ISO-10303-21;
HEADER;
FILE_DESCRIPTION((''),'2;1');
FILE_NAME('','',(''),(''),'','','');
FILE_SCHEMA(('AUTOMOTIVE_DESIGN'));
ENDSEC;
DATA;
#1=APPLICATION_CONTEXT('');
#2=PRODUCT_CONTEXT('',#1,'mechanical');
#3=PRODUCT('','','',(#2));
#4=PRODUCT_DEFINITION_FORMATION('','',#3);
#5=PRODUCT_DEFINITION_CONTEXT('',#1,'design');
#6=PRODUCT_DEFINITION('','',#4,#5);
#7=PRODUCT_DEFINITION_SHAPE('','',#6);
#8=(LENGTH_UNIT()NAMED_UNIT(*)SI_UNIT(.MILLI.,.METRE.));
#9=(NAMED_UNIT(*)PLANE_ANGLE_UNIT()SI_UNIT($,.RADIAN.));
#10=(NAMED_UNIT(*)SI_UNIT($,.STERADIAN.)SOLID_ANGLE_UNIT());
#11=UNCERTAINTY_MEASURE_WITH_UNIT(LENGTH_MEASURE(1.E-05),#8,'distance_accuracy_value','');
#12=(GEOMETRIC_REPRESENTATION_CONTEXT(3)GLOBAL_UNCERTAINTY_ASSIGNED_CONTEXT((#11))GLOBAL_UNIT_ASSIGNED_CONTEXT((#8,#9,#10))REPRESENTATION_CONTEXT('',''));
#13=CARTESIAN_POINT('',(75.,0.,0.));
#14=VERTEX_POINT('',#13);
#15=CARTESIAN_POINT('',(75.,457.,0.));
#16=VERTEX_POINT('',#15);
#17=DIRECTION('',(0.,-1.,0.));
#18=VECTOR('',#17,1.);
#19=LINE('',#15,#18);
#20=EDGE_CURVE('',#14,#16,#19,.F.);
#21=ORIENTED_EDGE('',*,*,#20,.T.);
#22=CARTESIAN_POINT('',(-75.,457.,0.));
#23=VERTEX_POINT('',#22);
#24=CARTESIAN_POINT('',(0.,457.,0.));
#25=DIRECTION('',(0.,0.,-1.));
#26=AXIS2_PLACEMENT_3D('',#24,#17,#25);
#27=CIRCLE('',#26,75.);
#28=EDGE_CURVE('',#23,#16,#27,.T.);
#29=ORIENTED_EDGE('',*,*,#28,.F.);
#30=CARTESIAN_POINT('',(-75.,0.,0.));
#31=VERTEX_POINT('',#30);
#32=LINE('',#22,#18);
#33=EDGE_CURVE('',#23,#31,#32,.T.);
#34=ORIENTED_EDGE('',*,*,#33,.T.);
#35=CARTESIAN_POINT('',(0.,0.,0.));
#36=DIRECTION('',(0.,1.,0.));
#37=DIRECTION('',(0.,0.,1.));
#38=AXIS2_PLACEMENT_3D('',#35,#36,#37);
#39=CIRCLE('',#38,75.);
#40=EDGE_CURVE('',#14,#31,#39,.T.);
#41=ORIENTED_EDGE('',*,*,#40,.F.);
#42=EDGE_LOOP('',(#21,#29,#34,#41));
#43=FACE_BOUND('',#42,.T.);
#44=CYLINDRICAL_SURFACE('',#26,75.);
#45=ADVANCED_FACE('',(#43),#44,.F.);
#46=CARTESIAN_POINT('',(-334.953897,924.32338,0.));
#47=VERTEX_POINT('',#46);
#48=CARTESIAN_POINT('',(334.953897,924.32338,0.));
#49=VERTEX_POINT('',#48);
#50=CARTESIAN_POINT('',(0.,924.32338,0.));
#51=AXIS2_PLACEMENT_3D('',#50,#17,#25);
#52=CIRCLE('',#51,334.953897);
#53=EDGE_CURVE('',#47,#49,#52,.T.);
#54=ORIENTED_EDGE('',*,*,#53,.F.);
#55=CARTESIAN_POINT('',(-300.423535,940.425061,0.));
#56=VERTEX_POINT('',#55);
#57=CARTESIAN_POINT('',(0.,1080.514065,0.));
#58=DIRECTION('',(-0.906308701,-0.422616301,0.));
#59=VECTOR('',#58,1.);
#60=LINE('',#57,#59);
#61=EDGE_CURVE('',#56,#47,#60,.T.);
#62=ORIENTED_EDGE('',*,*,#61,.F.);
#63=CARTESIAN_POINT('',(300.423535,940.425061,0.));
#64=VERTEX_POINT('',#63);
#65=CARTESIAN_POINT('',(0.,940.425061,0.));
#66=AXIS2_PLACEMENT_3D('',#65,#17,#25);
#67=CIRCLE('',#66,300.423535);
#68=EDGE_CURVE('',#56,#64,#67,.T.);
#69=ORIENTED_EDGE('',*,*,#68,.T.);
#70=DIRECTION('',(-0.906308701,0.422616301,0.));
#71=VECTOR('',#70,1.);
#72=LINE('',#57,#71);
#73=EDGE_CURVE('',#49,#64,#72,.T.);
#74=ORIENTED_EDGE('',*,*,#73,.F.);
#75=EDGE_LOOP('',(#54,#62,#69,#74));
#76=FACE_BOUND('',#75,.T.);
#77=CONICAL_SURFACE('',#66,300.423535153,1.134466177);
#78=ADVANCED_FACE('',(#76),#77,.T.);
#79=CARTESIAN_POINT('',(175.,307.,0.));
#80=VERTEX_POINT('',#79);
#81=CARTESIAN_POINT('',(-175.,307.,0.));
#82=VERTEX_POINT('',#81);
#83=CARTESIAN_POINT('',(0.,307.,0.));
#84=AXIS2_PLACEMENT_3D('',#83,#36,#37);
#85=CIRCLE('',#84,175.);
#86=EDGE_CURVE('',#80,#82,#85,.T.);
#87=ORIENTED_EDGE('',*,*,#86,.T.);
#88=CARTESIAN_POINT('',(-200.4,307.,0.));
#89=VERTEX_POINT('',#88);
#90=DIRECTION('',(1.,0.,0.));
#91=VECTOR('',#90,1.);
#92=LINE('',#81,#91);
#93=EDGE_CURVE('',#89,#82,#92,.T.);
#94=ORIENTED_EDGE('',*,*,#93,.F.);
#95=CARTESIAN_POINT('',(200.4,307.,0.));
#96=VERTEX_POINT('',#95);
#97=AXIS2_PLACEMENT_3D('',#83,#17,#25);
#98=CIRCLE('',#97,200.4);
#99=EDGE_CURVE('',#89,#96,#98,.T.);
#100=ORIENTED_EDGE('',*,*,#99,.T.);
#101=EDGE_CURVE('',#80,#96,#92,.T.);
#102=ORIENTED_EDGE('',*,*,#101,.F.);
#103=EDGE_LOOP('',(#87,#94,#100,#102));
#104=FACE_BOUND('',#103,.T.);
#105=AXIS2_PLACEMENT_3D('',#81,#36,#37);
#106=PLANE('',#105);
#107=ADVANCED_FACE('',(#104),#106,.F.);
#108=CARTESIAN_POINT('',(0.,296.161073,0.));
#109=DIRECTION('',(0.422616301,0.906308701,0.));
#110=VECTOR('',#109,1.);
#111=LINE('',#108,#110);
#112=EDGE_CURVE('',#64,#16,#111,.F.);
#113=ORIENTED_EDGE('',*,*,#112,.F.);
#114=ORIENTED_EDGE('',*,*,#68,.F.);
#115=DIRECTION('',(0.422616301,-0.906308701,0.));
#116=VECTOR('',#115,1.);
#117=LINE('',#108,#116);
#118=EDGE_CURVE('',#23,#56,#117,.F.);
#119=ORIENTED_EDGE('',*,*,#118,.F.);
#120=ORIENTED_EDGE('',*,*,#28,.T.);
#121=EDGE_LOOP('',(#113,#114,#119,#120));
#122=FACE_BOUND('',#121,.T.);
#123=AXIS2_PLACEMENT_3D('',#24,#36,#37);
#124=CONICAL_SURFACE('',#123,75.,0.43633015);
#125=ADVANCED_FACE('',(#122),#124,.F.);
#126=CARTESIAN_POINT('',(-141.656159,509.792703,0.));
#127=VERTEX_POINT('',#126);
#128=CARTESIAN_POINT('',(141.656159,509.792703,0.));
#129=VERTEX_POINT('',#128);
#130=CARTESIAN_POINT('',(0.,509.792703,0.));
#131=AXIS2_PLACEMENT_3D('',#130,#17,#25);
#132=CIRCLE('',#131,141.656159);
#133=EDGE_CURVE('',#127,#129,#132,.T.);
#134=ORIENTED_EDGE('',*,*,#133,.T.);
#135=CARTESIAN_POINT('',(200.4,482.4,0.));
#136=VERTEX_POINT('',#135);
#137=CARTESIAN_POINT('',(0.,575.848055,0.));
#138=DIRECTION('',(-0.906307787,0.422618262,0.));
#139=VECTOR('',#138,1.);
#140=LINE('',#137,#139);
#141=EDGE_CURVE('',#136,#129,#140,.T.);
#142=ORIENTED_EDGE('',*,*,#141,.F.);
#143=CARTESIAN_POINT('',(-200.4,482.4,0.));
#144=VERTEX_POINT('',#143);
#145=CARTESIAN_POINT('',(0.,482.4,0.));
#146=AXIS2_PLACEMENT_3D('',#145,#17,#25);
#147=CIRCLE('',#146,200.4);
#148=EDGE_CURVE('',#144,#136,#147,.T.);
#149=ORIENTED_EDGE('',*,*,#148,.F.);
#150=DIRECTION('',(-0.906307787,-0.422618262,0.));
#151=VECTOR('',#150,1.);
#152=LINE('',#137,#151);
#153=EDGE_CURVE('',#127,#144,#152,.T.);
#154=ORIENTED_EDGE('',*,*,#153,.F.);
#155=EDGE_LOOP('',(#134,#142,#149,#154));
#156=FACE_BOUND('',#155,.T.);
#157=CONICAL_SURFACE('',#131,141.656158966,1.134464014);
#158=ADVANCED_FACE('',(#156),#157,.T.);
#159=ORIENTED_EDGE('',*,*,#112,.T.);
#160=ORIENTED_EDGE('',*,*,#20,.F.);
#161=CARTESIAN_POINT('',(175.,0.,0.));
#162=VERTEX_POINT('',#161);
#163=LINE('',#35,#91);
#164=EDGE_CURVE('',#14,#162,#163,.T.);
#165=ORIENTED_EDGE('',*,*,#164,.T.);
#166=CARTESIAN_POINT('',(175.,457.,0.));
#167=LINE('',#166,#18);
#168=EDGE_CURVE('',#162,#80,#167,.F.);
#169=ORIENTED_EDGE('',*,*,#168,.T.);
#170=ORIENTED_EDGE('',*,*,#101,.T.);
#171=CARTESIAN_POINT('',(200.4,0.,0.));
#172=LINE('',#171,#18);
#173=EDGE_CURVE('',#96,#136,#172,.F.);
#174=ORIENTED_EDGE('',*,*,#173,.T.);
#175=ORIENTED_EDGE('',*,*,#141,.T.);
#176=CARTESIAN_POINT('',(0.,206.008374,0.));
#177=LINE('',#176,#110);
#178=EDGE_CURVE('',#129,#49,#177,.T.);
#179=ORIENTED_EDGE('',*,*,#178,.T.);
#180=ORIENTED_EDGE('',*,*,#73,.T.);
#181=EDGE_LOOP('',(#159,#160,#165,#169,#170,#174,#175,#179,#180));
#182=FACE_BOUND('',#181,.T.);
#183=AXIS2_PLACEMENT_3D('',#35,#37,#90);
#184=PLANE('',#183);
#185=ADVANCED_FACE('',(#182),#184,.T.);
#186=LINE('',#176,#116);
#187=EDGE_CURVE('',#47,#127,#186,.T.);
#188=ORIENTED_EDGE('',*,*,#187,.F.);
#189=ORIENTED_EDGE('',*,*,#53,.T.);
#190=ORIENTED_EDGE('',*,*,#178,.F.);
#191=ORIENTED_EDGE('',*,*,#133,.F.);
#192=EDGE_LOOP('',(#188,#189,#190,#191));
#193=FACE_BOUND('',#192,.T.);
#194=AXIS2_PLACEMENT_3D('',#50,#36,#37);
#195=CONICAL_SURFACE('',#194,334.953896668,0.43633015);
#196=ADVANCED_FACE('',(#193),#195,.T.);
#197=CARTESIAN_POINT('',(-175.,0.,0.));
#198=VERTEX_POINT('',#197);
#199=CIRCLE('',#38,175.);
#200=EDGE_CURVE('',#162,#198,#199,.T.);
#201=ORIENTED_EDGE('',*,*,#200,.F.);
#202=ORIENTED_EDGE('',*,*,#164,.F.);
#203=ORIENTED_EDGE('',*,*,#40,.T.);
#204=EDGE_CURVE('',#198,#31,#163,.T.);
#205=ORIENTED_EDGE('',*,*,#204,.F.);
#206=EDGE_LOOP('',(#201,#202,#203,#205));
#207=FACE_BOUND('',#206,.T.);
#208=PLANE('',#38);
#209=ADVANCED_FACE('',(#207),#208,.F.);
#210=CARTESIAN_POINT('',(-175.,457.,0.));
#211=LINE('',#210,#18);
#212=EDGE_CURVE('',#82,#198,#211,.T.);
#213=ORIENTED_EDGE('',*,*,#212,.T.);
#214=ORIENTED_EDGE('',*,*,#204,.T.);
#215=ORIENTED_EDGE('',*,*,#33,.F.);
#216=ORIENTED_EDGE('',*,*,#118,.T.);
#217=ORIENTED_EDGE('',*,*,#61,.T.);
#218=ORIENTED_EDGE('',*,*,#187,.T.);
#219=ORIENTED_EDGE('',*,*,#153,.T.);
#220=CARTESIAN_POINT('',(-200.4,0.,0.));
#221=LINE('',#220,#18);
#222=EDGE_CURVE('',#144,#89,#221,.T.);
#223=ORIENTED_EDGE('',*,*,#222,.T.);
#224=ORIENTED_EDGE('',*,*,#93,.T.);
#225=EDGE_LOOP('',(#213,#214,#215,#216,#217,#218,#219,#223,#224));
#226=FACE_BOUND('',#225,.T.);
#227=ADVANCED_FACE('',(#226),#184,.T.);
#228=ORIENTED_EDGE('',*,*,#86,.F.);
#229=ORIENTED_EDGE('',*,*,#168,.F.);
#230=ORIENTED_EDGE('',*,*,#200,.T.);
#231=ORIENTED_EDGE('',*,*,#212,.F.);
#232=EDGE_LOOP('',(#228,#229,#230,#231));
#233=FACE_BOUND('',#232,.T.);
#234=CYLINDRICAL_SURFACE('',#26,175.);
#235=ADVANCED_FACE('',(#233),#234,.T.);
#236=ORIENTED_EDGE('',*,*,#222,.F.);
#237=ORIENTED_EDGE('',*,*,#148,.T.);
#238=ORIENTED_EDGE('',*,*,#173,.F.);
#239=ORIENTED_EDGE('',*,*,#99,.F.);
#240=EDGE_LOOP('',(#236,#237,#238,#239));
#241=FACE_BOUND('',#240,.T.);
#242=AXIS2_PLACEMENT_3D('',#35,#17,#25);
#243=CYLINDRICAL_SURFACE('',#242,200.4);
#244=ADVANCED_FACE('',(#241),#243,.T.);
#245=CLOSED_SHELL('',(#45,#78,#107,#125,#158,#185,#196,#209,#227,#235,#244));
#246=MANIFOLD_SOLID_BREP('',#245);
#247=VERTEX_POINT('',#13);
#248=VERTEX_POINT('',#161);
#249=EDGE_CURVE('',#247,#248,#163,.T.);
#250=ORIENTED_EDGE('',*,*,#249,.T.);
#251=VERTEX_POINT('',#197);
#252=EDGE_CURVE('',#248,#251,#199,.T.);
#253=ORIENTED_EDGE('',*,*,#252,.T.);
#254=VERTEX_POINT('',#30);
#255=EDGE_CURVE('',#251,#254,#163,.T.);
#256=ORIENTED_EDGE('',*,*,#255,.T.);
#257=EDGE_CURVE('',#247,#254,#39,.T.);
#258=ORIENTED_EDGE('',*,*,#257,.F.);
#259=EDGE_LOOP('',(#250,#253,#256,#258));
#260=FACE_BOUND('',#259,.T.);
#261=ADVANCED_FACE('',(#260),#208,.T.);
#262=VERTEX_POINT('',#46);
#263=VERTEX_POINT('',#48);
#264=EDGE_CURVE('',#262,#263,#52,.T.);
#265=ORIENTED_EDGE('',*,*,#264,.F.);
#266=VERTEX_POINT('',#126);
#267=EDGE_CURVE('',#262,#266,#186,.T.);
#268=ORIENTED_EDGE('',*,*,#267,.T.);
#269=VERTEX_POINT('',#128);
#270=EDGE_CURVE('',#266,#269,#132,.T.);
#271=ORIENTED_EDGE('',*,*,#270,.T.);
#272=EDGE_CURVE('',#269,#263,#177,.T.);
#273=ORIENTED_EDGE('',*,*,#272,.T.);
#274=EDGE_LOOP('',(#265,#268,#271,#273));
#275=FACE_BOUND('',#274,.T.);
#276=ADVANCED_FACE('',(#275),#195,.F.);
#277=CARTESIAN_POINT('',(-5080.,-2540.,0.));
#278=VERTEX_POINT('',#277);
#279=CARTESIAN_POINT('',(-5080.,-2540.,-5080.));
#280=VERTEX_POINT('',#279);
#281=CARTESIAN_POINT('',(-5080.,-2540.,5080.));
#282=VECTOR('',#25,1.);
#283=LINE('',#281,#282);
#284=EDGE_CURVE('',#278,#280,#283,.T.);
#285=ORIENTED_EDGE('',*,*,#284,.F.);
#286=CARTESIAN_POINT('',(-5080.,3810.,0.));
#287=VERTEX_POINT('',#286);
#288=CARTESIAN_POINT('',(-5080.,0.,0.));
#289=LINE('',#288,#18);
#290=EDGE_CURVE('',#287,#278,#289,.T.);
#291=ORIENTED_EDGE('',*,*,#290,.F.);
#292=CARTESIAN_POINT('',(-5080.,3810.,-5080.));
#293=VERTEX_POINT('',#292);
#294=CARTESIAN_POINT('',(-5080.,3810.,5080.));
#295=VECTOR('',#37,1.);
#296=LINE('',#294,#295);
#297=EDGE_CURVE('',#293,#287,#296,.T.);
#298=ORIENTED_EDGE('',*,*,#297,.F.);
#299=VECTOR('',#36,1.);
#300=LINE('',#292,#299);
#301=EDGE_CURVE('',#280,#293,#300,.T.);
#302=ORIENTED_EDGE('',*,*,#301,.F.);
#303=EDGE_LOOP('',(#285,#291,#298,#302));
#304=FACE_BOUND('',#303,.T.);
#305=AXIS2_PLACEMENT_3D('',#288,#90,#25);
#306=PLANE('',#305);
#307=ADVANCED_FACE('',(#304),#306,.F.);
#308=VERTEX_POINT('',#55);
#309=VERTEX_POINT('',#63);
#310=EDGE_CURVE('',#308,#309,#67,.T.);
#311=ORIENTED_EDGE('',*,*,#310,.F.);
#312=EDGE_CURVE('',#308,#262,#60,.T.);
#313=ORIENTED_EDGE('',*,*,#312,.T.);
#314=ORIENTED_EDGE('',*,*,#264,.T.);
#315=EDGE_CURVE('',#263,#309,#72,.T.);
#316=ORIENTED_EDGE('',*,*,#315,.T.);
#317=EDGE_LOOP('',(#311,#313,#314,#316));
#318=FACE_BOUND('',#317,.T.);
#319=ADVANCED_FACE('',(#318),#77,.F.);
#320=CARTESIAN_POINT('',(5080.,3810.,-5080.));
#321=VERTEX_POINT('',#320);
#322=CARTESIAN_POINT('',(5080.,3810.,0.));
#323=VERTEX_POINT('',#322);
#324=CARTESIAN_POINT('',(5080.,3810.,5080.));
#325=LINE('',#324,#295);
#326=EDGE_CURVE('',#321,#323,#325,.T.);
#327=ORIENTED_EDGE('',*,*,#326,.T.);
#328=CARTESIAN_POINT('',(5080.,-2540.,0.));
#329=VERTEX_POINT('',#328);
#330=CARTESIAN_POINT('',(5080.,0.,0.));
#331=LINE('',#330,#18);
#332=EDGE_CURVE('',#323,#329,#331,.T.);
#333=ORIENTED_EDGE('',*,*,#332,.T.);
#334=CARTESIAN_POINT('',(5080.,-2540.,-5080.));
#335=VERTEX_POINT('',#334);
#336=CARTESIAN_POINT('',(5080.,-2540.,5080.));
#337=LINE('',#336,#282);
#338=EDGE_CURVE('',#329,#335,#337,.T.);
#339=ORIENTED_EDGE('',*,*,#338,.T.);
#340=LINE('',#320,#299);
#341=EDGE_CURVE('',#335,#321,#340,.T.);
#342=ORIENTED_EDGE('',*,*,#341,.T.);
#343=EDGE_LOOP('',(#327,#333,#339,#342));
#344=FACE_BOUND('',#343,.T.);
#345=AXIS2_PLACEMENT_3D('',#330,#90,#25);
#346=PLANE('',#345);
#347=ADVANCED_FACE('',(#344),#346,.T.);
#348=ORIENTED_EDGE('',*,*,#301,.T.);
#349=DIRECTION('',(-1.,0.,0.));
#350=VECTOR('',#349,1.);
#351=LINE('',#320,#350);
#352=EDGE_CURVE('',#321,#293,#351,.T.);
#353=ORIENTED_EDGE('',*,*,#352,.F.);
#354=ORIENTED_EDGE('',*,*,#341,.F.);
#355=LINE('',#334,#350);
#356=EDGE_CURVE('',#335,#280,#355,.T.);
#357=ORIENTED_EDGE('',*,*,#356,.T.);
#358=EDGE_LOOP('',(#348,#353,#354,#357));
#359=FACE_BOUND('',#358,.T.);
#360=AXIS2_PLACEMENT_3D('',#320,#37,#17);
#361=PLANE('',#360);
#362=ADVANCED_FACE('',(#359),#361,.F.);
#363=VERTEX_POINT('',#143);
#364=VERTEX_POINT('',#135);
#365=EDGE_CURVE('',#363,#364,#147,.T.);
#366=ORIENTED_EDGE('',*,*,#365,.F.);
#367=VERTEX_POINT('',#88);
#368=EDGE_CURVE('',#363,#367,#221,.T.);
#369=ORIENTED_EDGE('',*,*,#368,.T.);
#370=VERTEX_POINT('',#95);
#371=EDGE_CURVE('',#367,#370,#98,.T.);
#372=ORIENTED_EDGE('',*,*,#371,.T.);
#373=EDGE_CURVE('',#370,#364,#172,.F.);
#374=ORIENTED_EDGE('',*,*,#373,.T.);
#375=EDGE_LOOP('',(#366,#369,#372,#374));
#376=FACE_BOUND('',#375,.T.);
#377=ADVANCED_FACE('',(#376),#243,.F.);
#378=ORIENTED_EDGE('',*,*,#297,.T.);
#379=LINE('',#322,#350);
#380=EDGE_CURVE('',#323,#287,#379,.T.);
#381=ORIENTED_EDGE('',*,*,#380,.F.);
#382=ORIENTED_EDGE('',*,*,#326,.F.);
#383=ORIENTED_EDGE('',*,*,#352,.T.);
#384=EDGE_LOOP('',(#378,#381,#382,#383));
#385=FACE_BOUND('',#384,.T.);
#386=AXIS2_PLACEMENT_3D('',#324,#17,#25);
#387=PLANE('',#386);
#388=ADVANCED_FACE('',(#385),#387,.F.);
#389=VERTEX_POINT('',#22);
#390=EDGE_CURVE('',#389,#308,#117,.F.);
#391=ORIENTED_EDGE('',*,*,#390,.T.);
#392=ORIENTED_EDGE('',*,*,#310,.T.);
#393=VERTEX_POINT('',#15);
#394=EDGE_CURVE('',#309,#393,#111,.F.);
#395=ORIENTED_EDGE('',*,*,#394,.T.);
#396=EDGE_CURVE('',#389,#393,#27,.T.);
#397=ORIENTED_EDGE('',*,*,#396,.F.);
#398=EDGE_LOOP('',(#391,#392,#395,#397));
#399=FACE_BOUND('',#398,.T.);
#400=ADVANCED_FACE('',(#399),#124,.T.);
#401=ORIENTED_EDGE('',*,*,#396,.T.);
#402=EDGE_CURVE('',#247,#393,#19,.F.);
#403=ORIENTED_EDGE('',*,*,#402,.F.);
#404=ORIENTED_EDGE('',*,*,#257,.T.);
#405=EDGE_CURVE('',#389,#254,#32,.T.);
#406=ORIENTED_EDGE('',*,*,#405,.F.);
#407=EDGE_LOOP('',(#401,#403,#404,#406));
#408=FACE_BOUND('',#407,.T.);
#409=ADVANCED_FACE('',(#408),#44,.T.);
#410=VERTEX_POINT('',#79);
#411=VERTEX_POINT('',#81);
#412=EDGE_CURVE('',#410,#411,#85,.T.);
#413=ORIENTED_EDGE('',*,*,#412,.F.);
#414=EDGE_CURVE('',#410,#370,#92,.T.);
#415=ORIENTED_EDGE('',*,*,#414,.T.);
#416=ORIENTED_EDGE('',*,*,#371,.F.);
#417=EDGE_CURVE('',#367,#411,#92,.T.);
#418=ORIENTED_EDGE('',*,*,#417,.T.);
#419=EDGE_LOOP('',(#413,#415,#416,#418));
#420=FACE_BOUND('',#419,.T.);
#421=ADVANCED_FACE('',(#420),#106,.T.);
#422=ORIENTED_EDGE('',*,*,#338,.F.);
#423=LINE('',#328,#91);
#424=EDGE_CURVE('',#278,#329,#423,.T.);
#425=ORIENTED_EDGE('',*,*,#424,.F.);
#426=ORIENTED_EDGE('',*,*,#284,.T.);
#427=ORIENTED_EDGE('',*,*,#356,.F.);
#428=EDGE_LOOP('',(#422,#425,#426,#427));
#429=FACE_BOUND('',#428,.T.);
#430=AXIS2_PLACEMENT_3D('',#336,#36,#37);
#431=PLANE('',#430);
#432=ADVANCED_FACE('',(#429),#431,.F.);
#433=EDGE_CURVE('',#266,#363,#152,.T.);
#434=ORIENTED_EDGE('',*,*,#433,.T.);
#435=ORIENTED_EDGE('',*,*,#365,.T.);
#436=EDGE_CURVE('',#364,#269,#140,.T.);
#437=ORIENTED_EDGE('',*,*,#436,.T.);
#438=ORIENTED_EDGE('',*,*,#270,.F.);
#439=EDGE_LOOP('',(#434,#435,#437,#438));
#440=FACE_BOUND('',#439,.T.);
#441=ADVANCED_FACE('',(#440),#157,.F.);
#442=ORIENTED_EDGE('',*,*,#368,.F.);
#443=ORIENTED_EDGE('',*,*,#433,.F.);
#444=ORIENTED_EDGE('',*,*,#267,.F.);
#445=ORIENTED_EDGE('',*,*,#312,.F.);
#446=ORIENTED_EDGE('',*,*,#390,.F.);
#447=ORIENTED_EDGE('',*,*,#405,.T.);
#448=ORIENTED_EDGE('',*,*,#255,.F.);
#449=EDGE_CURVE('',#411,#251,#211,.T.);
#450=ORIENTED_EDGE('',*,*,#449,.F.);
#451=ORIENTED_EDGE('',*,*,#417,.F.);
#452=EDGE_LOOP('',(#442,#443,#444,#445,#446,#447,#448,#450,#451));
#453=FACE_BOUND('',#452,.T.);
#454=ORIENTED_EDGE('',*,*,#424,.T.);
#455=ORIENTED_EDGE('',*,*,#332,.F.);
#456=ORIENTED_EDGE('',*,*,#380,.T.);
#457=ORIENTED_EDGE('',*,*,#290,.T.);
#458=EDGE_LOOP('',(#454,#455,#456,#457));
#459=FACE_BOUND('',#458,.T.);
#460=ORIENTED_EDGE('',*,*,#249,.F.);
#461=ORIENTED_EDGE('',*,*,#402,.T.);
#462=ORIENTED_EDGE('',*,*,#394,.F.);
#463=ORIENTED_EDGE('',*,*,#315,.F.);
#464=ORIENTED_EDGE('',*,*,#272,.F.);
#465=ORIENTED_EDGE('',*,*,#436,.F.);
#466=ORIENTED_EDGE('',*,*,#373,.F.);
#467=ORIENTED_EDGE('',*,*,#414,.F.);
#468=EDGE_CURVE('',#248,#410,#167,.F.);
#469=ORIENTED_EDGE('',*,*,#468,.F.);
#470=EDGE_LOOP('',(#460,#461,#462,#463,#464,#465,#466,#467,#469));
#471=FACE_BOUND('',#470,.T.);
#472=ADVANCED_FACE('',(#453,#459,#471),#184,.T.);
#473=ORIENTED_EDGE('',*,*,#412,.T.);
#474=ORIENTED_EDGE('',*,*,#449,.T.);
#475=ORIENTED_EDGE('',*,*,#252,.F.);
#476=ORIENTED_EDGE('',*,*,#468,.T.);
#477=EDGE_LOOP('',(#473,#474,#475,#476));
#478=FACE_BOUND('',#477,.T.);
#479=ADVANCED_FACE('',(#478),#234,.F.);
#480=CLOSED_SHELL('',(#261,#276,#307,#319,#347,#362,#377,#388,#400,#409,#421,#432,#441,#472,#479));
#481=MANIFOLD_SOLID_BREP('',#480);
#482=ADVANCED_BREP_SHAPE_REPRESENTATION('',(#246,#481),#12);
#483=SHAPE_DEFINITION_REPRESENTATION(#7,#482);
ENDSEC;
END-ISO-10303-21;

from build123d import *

# Parameters (mm, degrees)
SKETCH1_R           = 175
SKETCH1_R_2         = 75
BOSS_EXTRUDE1_DEPTH = 457
SKETCH3_W           = 10160
SKETCH3_H           = 6350
BOSS_EXTRUDE2_DEPTH = 5080
SKETCH4_W           = 13475.768327993
SKETCH4_H           = 8367.586519284
CUT_EXTRUDE1_DEPTH  = 8132.96778154


# Read off the part's stored shape, not the designer's step: Intersect1
with BuildPart() as part:
    # Sketch1 → Boss-Extrude1 (new body)
    with BuildSketch(Plane(origin=(0, 0, 0), x_dir=(1, 0, 0), z_dir=(0, 1, 0))):
        with Locations(Location((0, 0, 0), (0, 0, 270))):
            Circle(SKETCH1_R)
        with Locations(Location((0, 0, 0), (0, 0, 270))):
            Circle(SKETCH1_R_2, mode=Mode.SUBTRACT)
    extrude(amount=BOSS_EXTRUDE1_DEPTH)

    # Sketch2 → Revolve1 (revolve)
    with BuildSketch(Plane.XY, mode=Mode.PRIVATE) as revolve1_sk:
        Polygon((-175, 307), (-200.4, 307), (-200.4, 482.4), (-141.656158966, 509.792702943), (-334.953896668, 924.323380121), (-300.423535153, 940.425061203), (-107.203362165, 526.060723029), (-75, 457), (-175, 457), align=None)
    revolve(revolve1_sk.sketch.rotate(Axis((0, 0, 0), (0, 1, 0)), 270), axis=Axis((0, 0, 0), (0, 1, 0)))


with BuildPart() as body_2:
    # Sketch3 → Boss-Extrude2 (new, symmetric)
    with BuildSketch(Plane(origin=(0, 0, 0), x_dir=(0, 0, -1), z_dir=(1, 0, 0))):
        with Locations((0, 635)):
            Rectangle(SKETCH3_W, SKETCH3_H)
    extrude(amount=BOSS_EXTRUDE2_DEPTH, both=True)

    # Intersect1 outline → Intersect1 (revolve, cut)
    with BuildSketch(Plane.XY):
        Polygon((75, 457), (75, 0), (175, 0), (175, 307), (200.4, 307), (200.4, 482.4), (141.656158966, 509.792702943), (334.953896668, 924.323380121), (300.423535153, 940.425061203), align=None)
    revolve(axis=Axis((0, 0, 0), (0, 1, 0)), mode=Mode.SUBTRACT)


with BuildPart() as cut_extrude1_tool:
    # Sketch4 → Cut-Extrude1 (new, through all)
    with BuildSketch(Plane.XY):
        with Locations((454.179344916, 464.014834855)):
            Rectangle(SKETCH4_W, SKETCH4_H)
    extrude(amount=CUT_EXTRUDE1_DEPTH)


with BuildPart() as part_1:
    add(part.part)

    # Cut-Extrude1: cut by cut_extrude1_tool
    add(cut_extrude1_tool.part, mode=Mode.SUBTRACT)


with BuildPart() as body_2_1:
    add(body_2.part)

    # Cut-Extrude1: cut by cut_extrude1_tool
    add(cut_extrude1_tool.part, mode=Mode.SUBTRACT)


solid = Compound([part_1.part, body_2_1.part])
